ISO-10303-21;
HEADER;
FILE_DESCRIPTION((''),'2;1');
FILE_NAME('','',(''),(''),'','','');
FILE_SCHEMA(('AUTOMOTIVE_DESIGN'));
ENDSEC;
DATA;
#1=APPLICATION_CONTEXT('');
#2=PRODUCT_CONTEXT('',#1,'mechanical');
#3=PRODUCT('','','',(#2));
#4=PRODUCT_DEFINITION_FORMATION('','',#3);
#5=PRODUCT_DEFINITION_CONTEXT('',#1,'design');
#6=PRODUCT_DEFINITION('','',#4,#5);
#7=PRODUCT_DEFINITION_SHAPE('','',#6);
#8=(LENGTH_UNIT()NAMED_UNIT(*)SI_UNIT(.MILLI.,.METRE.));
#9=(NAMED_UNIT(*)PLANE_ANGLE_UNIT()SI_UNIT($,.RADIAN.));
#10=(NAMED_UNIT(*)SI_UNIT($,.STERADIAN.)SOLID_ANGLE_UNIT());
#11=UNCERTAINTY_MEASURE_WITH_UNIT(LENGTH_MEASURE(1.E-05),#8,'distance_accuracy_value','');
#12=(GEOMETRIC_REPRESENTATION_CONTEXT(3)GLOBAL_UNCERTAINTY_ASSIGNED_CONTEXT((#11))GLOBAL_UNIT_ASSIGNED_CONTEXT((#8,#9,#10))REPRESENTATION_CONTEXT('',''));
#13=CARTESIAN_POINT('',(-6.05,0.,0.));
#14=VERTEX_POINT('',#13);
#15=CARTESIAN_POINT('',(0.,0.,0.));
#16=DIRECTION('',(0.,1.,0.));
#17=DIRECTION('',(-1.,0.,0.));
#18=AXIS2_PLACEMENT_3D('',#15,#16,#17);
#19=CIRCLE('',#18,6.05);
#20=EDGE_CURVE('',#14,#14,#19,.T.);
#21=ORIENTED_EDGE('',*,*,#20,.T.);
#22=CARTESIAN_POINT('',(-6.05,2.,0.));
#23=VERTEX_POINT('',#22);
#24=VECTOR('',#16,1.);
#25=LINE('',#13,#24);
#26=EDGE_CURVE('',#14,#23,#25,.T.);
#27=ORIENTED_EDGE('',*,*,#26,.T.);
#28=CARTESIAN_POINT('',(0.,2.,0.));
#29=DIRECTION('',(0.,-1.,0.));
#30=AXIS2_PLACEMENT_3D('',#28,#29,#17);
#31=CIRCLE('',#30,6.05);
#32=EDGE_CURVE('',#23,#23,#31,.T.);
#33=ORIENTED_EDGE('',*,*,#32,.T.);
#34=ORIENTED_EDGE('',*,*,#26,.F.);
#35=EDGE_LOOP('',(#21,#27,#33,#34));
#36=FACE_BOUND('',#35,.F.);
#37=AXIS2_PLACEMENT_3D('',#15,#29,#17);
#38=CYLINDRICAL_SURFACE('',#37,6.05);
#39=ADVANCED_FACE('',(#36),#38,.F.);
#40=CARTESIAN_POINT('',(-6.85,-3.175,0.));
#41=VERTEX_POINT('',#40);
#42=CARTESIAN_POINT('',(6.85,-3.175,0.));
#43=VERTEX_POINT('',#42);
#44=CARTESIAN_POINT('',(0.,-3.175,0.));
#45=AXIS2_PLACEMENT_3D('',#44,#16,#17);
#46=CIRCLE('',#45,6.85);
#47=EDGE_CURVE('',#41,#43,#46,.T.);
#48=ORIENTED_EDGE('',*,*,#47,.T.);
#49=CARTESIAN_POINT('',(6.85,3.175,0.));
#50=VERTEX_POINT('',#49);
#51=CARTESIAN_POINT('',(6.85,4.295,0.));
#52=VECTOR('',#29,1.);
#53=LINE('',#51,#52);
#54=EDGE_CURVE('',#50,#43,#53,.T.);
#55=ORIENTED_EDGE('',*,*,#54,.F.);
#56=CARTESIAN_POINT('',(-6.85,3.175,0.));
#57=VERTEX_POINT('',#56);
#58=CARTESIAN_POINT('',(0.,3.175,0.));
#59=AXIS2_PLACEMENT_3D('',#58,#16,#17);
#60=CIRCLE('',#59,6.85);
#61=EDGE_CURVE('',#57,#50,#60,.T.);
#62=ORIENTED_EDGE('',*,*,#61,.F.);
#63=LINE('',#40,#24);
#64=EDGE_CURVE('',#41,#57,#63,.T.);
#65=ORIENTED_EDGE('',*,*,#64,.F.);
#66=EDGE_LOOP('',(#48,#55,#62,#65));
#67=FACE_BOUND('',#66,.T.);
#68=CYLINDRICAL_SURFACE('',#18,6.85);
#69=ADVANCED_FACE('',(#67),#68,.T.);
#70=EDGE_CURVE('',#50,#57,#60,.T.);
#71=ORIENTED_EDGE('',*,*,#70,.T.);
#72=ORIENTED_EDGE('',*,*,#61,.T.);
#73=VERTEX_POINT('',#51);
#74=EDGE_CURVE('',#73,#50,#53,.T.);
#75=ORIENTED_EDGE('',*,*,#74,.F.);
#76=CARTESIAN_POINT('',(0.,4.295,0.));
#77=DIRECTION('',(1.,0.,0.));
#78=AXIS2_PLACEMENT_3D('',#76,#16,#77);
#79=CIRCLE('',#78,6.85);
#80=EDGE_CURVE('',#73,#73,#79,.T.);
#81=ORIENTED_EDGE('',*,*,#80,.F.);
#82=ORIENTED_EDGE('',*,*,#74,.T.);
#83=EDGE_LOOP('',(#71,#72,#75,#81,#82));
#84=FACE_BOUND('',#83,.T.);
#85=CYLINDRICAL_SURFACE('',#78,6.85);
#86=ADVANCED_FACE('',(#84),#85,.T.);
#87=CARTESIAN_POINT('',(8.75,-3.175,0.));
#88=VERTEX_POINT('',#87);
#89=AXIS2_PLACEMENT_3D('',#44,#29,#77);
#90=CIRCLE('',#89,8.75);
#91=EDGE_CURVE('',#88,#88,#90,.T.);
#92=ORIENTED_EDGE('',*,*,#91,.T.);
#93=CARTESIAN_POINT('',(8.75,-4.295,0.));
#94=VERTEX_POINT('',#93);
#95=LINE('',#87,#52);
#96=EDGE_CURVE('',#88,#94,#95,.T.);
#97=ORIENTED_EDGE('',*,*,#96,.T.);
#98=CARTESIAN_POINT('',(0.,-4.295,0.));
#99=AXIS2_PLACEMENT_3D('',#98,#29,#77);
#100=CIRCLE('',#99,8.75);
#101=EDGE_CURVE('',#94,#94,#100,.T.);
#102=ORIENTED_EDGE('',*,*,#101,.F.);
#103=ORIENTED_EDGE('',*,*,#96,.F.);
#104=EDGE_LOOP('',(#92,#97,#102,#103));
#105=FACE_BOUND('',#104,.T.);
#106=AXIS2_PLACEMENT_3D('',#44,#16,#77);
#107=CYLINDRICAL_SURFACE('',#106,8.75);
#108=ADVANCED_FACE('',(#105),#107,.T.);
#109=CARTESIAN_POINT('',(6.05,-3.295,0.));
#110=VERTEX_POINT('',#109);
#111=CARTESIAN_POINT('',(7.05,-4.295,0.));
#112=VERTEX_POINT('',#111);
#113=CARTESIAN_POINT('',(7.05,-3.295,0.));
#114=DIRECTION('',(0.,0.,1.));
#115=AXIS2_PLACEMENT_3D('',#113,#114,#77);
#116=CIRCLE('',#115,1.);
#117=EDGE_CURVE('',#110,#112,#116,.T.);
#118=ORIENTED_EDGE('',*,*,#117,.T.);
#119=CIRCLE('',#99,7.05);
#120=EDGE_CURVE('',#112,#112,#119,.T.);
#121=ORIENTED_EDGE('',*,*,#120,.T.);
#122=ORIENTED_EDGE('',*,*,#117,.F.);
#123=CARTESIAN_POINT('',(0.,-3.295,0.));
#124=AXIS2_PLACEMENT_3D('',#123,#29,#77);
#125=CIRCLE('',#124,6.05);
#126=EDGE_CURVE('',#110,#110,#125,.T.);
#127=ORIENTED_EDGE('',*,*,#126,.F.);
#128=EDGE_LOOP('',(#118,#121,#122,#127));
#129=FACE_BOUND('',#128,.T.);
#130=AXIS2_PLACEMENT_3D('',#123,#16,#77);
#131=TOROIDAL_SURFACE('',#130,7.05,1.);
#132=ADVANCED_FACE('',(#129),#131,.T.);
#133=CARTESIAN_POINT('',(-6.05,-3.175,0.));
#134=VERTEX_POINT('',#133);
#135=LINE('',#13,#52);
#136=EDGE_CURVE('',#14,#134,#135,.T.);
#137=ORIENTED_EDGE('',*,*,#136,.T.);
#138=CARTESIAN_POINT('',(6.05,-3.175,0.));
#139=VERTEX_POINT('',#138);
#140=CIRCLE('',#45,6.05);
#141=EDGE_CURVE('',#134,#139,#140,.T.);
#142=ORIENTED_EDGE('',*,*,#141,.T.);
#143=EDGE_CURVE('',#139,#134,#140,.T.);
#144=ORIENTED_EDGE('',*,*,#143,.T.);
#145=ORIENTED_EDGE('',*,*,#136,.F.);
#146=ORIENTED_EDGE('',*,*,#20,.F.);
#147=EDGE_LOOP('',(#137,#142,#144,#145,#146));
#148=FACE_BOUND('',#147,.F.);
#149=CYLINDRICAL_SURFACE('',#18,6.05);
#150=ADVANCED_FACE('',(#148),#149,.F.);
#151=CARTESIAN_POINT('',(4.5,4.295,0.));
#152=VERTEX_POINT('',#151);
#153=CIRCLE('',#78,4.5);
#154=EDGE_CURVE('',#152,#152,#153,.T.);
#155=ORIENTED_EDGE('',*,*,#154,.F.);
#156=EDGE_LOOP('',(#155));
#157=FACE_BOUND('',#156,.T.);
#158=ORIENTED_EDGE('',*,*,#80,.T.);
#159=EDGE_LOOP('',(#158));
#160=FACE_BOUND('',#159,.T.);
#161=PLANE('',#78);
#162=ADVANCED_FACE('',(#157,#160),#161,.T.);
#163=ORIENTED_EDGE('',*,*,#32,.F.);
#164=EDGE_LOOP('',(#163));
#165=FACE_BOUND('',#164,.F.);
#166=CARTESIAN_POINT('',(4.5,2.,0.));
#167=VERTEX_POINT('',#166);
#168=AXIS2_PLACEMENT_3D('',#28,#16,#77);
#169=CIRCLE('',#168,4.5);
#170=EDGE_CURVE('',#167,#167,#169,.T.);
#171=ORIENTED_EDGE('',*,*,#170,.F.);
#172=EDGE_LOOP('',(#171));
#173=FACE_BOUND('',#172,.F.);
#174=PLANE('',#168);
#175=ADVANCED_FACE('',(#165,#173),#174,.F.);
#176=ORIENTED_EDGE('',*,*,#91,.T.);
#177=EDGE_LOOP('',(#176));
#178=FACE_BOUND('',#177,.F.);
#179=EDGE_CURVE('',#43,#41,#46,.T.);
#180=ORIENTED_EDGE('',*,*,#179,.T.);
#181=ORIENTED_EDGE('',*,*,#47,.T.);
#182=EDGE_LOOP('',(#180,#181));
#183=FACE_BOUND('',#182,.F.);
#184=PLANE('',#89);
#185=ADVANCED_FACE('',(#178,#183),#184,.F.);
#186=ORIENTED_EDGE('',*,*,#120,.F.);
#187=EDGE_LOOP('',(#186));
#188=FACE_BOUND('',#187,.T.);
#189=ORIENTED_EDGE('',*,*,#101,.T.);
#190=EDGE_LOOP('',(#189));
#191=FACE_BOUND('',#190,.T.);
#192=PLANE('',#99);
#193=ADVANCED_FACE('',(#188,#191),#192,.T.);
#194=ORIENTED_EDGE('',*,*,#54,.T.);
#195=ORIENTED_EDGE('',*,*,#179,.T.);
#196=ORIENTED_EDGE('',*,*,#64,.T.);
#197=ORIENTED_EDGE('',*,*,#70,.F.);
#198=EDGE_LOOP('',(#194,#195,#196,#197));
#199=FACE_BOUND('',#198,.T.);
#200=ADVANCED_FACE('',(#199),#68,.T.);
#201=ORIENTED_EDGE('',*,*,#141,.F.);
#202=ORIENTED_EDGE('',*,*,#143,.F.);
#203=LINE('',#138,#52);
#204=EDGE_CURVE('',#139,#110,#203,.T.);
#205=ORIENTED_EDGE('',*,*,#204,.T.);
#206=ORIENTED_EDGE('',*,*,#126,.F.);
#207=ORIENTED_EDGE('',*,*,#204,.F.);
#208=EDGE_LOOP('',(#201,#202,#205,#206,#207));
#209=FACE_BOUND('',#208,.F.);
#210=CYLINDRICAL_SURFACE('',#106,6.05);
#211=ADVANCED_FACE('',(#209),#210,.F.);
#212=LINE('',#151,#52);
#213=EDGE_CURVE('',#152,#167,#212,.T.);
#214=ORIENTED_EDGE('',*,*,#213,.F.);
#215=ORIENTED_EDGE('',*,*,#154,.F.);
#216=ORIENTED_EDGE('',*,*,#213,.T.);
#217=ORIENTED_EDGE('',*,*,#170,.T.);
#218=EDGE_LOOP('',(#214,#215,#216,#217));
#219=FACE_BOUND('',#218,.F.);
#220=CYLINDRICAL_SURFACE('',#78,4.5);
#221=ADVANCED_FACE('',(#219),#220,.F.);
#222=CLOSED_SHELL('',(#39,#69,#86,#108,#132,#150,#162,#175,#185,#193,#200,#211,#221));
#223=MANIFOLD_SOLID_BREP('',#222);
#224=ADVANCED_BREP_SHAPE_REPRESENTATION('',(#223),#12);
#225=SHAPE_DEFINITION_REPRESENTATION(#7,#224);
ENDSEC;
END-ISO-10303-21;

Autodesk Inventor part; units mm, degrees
ref_plane "YZ Plane" through (0, 0, 0) normal (1, 0, 0) x (0, 1, 0)
ref_plane "XZ Plane" through (0, 0, 0) normal (0, 1, 0) x (-1, 0, 0)
ref_plane "XY Plane" through (0, 0, 0) normal (0, 0, 1) x (1, 0, 0)
sketch "Boceto1" plane through (0, 0, 0) normal (0, 1, 0) x (-1, 0, 0)
  circle A0 centre (0, 0) radius 6.05
  circle A1 centre (0, 0) radius 6.85
  dimension "d0" = 12.1
  dimension "d1" = 0.8
extrude "Extrusión1" add sketch "Boceto1" along normal mid plane 6.35
sketch "Boceto2" plane through (0, 3.175, 0) normal (0, 1, 0) x (1, 0, 0)
  circle A0 centre (0, 0) radius 6.05 projected
  circle A1 centre (0, 0) radius 8.75
  dimension "d4" = 17.5
extrude "Extrusión2" add sketch "Boceto2" along normal blind 1.12
sketch "Boceto3" plane through (0, -3.175, 0) normal (0, -1, 0) x (1, 0, 0)
  circle A0 centre (0, 0) radius 6.05 projected
  circle A1 centre (0, 0) radius 8.75
  circle A2 centre (0, 0) radius 8.75 projected
extrude "Extrusión3" add sketch "Boceto3" along normal blind 1.12
sketch "Boceto4" plane through (0, 4.295, 0) normal (0, 1, 0) x (1, 0, 0)
  circle A0 centre (0, 0) radius 6.05 projected
  circle A1 centre (0, 0) radius 4.5
  dimension "d14" = 9
extrude "Extrusión4" add sketch "Boceto4" against normal blind 2.295
sketch "Boceto6" plane through (0, 3.175, 0) normal (0, -1, 0) x (1, 0, 0)
  circle A0 centre (0, 0) radius 6.85 projected
  circle A1 centre (0, 0) radius 8.53
  circle A2 centre (0, 0) radius 7.78
  dimension "d17" = 1.68
  dimension "d18" = 0.75
fillet "Empalme1" radius 1 1 edges at (-6.05, -4.295, 0)
sketch "Boceto7" plane through (0, 4.295, 0) normal (0, 1, 0) x (1, 0, 0)
  circle A0 centre (0, 0) radius 8.75 projected
  circle A1 centre (0, 0) radius 6.85 projected
  circle A2 centre (0, 0) radius 6.85 projected
extrude "Extrusión6" cut sketch "Boceto7" against normal up to surface (7.47 mm away)
sketch "Boceto5" plane through (0, -4.295, 0) normal (0, -1, 0) x (1, 0, 0)
  circle A0 centre (0, 0) radius 8.75 projected
  circle A1 centre (0, 0) radius 6.85 projected
properties part number "Idle pulley"
